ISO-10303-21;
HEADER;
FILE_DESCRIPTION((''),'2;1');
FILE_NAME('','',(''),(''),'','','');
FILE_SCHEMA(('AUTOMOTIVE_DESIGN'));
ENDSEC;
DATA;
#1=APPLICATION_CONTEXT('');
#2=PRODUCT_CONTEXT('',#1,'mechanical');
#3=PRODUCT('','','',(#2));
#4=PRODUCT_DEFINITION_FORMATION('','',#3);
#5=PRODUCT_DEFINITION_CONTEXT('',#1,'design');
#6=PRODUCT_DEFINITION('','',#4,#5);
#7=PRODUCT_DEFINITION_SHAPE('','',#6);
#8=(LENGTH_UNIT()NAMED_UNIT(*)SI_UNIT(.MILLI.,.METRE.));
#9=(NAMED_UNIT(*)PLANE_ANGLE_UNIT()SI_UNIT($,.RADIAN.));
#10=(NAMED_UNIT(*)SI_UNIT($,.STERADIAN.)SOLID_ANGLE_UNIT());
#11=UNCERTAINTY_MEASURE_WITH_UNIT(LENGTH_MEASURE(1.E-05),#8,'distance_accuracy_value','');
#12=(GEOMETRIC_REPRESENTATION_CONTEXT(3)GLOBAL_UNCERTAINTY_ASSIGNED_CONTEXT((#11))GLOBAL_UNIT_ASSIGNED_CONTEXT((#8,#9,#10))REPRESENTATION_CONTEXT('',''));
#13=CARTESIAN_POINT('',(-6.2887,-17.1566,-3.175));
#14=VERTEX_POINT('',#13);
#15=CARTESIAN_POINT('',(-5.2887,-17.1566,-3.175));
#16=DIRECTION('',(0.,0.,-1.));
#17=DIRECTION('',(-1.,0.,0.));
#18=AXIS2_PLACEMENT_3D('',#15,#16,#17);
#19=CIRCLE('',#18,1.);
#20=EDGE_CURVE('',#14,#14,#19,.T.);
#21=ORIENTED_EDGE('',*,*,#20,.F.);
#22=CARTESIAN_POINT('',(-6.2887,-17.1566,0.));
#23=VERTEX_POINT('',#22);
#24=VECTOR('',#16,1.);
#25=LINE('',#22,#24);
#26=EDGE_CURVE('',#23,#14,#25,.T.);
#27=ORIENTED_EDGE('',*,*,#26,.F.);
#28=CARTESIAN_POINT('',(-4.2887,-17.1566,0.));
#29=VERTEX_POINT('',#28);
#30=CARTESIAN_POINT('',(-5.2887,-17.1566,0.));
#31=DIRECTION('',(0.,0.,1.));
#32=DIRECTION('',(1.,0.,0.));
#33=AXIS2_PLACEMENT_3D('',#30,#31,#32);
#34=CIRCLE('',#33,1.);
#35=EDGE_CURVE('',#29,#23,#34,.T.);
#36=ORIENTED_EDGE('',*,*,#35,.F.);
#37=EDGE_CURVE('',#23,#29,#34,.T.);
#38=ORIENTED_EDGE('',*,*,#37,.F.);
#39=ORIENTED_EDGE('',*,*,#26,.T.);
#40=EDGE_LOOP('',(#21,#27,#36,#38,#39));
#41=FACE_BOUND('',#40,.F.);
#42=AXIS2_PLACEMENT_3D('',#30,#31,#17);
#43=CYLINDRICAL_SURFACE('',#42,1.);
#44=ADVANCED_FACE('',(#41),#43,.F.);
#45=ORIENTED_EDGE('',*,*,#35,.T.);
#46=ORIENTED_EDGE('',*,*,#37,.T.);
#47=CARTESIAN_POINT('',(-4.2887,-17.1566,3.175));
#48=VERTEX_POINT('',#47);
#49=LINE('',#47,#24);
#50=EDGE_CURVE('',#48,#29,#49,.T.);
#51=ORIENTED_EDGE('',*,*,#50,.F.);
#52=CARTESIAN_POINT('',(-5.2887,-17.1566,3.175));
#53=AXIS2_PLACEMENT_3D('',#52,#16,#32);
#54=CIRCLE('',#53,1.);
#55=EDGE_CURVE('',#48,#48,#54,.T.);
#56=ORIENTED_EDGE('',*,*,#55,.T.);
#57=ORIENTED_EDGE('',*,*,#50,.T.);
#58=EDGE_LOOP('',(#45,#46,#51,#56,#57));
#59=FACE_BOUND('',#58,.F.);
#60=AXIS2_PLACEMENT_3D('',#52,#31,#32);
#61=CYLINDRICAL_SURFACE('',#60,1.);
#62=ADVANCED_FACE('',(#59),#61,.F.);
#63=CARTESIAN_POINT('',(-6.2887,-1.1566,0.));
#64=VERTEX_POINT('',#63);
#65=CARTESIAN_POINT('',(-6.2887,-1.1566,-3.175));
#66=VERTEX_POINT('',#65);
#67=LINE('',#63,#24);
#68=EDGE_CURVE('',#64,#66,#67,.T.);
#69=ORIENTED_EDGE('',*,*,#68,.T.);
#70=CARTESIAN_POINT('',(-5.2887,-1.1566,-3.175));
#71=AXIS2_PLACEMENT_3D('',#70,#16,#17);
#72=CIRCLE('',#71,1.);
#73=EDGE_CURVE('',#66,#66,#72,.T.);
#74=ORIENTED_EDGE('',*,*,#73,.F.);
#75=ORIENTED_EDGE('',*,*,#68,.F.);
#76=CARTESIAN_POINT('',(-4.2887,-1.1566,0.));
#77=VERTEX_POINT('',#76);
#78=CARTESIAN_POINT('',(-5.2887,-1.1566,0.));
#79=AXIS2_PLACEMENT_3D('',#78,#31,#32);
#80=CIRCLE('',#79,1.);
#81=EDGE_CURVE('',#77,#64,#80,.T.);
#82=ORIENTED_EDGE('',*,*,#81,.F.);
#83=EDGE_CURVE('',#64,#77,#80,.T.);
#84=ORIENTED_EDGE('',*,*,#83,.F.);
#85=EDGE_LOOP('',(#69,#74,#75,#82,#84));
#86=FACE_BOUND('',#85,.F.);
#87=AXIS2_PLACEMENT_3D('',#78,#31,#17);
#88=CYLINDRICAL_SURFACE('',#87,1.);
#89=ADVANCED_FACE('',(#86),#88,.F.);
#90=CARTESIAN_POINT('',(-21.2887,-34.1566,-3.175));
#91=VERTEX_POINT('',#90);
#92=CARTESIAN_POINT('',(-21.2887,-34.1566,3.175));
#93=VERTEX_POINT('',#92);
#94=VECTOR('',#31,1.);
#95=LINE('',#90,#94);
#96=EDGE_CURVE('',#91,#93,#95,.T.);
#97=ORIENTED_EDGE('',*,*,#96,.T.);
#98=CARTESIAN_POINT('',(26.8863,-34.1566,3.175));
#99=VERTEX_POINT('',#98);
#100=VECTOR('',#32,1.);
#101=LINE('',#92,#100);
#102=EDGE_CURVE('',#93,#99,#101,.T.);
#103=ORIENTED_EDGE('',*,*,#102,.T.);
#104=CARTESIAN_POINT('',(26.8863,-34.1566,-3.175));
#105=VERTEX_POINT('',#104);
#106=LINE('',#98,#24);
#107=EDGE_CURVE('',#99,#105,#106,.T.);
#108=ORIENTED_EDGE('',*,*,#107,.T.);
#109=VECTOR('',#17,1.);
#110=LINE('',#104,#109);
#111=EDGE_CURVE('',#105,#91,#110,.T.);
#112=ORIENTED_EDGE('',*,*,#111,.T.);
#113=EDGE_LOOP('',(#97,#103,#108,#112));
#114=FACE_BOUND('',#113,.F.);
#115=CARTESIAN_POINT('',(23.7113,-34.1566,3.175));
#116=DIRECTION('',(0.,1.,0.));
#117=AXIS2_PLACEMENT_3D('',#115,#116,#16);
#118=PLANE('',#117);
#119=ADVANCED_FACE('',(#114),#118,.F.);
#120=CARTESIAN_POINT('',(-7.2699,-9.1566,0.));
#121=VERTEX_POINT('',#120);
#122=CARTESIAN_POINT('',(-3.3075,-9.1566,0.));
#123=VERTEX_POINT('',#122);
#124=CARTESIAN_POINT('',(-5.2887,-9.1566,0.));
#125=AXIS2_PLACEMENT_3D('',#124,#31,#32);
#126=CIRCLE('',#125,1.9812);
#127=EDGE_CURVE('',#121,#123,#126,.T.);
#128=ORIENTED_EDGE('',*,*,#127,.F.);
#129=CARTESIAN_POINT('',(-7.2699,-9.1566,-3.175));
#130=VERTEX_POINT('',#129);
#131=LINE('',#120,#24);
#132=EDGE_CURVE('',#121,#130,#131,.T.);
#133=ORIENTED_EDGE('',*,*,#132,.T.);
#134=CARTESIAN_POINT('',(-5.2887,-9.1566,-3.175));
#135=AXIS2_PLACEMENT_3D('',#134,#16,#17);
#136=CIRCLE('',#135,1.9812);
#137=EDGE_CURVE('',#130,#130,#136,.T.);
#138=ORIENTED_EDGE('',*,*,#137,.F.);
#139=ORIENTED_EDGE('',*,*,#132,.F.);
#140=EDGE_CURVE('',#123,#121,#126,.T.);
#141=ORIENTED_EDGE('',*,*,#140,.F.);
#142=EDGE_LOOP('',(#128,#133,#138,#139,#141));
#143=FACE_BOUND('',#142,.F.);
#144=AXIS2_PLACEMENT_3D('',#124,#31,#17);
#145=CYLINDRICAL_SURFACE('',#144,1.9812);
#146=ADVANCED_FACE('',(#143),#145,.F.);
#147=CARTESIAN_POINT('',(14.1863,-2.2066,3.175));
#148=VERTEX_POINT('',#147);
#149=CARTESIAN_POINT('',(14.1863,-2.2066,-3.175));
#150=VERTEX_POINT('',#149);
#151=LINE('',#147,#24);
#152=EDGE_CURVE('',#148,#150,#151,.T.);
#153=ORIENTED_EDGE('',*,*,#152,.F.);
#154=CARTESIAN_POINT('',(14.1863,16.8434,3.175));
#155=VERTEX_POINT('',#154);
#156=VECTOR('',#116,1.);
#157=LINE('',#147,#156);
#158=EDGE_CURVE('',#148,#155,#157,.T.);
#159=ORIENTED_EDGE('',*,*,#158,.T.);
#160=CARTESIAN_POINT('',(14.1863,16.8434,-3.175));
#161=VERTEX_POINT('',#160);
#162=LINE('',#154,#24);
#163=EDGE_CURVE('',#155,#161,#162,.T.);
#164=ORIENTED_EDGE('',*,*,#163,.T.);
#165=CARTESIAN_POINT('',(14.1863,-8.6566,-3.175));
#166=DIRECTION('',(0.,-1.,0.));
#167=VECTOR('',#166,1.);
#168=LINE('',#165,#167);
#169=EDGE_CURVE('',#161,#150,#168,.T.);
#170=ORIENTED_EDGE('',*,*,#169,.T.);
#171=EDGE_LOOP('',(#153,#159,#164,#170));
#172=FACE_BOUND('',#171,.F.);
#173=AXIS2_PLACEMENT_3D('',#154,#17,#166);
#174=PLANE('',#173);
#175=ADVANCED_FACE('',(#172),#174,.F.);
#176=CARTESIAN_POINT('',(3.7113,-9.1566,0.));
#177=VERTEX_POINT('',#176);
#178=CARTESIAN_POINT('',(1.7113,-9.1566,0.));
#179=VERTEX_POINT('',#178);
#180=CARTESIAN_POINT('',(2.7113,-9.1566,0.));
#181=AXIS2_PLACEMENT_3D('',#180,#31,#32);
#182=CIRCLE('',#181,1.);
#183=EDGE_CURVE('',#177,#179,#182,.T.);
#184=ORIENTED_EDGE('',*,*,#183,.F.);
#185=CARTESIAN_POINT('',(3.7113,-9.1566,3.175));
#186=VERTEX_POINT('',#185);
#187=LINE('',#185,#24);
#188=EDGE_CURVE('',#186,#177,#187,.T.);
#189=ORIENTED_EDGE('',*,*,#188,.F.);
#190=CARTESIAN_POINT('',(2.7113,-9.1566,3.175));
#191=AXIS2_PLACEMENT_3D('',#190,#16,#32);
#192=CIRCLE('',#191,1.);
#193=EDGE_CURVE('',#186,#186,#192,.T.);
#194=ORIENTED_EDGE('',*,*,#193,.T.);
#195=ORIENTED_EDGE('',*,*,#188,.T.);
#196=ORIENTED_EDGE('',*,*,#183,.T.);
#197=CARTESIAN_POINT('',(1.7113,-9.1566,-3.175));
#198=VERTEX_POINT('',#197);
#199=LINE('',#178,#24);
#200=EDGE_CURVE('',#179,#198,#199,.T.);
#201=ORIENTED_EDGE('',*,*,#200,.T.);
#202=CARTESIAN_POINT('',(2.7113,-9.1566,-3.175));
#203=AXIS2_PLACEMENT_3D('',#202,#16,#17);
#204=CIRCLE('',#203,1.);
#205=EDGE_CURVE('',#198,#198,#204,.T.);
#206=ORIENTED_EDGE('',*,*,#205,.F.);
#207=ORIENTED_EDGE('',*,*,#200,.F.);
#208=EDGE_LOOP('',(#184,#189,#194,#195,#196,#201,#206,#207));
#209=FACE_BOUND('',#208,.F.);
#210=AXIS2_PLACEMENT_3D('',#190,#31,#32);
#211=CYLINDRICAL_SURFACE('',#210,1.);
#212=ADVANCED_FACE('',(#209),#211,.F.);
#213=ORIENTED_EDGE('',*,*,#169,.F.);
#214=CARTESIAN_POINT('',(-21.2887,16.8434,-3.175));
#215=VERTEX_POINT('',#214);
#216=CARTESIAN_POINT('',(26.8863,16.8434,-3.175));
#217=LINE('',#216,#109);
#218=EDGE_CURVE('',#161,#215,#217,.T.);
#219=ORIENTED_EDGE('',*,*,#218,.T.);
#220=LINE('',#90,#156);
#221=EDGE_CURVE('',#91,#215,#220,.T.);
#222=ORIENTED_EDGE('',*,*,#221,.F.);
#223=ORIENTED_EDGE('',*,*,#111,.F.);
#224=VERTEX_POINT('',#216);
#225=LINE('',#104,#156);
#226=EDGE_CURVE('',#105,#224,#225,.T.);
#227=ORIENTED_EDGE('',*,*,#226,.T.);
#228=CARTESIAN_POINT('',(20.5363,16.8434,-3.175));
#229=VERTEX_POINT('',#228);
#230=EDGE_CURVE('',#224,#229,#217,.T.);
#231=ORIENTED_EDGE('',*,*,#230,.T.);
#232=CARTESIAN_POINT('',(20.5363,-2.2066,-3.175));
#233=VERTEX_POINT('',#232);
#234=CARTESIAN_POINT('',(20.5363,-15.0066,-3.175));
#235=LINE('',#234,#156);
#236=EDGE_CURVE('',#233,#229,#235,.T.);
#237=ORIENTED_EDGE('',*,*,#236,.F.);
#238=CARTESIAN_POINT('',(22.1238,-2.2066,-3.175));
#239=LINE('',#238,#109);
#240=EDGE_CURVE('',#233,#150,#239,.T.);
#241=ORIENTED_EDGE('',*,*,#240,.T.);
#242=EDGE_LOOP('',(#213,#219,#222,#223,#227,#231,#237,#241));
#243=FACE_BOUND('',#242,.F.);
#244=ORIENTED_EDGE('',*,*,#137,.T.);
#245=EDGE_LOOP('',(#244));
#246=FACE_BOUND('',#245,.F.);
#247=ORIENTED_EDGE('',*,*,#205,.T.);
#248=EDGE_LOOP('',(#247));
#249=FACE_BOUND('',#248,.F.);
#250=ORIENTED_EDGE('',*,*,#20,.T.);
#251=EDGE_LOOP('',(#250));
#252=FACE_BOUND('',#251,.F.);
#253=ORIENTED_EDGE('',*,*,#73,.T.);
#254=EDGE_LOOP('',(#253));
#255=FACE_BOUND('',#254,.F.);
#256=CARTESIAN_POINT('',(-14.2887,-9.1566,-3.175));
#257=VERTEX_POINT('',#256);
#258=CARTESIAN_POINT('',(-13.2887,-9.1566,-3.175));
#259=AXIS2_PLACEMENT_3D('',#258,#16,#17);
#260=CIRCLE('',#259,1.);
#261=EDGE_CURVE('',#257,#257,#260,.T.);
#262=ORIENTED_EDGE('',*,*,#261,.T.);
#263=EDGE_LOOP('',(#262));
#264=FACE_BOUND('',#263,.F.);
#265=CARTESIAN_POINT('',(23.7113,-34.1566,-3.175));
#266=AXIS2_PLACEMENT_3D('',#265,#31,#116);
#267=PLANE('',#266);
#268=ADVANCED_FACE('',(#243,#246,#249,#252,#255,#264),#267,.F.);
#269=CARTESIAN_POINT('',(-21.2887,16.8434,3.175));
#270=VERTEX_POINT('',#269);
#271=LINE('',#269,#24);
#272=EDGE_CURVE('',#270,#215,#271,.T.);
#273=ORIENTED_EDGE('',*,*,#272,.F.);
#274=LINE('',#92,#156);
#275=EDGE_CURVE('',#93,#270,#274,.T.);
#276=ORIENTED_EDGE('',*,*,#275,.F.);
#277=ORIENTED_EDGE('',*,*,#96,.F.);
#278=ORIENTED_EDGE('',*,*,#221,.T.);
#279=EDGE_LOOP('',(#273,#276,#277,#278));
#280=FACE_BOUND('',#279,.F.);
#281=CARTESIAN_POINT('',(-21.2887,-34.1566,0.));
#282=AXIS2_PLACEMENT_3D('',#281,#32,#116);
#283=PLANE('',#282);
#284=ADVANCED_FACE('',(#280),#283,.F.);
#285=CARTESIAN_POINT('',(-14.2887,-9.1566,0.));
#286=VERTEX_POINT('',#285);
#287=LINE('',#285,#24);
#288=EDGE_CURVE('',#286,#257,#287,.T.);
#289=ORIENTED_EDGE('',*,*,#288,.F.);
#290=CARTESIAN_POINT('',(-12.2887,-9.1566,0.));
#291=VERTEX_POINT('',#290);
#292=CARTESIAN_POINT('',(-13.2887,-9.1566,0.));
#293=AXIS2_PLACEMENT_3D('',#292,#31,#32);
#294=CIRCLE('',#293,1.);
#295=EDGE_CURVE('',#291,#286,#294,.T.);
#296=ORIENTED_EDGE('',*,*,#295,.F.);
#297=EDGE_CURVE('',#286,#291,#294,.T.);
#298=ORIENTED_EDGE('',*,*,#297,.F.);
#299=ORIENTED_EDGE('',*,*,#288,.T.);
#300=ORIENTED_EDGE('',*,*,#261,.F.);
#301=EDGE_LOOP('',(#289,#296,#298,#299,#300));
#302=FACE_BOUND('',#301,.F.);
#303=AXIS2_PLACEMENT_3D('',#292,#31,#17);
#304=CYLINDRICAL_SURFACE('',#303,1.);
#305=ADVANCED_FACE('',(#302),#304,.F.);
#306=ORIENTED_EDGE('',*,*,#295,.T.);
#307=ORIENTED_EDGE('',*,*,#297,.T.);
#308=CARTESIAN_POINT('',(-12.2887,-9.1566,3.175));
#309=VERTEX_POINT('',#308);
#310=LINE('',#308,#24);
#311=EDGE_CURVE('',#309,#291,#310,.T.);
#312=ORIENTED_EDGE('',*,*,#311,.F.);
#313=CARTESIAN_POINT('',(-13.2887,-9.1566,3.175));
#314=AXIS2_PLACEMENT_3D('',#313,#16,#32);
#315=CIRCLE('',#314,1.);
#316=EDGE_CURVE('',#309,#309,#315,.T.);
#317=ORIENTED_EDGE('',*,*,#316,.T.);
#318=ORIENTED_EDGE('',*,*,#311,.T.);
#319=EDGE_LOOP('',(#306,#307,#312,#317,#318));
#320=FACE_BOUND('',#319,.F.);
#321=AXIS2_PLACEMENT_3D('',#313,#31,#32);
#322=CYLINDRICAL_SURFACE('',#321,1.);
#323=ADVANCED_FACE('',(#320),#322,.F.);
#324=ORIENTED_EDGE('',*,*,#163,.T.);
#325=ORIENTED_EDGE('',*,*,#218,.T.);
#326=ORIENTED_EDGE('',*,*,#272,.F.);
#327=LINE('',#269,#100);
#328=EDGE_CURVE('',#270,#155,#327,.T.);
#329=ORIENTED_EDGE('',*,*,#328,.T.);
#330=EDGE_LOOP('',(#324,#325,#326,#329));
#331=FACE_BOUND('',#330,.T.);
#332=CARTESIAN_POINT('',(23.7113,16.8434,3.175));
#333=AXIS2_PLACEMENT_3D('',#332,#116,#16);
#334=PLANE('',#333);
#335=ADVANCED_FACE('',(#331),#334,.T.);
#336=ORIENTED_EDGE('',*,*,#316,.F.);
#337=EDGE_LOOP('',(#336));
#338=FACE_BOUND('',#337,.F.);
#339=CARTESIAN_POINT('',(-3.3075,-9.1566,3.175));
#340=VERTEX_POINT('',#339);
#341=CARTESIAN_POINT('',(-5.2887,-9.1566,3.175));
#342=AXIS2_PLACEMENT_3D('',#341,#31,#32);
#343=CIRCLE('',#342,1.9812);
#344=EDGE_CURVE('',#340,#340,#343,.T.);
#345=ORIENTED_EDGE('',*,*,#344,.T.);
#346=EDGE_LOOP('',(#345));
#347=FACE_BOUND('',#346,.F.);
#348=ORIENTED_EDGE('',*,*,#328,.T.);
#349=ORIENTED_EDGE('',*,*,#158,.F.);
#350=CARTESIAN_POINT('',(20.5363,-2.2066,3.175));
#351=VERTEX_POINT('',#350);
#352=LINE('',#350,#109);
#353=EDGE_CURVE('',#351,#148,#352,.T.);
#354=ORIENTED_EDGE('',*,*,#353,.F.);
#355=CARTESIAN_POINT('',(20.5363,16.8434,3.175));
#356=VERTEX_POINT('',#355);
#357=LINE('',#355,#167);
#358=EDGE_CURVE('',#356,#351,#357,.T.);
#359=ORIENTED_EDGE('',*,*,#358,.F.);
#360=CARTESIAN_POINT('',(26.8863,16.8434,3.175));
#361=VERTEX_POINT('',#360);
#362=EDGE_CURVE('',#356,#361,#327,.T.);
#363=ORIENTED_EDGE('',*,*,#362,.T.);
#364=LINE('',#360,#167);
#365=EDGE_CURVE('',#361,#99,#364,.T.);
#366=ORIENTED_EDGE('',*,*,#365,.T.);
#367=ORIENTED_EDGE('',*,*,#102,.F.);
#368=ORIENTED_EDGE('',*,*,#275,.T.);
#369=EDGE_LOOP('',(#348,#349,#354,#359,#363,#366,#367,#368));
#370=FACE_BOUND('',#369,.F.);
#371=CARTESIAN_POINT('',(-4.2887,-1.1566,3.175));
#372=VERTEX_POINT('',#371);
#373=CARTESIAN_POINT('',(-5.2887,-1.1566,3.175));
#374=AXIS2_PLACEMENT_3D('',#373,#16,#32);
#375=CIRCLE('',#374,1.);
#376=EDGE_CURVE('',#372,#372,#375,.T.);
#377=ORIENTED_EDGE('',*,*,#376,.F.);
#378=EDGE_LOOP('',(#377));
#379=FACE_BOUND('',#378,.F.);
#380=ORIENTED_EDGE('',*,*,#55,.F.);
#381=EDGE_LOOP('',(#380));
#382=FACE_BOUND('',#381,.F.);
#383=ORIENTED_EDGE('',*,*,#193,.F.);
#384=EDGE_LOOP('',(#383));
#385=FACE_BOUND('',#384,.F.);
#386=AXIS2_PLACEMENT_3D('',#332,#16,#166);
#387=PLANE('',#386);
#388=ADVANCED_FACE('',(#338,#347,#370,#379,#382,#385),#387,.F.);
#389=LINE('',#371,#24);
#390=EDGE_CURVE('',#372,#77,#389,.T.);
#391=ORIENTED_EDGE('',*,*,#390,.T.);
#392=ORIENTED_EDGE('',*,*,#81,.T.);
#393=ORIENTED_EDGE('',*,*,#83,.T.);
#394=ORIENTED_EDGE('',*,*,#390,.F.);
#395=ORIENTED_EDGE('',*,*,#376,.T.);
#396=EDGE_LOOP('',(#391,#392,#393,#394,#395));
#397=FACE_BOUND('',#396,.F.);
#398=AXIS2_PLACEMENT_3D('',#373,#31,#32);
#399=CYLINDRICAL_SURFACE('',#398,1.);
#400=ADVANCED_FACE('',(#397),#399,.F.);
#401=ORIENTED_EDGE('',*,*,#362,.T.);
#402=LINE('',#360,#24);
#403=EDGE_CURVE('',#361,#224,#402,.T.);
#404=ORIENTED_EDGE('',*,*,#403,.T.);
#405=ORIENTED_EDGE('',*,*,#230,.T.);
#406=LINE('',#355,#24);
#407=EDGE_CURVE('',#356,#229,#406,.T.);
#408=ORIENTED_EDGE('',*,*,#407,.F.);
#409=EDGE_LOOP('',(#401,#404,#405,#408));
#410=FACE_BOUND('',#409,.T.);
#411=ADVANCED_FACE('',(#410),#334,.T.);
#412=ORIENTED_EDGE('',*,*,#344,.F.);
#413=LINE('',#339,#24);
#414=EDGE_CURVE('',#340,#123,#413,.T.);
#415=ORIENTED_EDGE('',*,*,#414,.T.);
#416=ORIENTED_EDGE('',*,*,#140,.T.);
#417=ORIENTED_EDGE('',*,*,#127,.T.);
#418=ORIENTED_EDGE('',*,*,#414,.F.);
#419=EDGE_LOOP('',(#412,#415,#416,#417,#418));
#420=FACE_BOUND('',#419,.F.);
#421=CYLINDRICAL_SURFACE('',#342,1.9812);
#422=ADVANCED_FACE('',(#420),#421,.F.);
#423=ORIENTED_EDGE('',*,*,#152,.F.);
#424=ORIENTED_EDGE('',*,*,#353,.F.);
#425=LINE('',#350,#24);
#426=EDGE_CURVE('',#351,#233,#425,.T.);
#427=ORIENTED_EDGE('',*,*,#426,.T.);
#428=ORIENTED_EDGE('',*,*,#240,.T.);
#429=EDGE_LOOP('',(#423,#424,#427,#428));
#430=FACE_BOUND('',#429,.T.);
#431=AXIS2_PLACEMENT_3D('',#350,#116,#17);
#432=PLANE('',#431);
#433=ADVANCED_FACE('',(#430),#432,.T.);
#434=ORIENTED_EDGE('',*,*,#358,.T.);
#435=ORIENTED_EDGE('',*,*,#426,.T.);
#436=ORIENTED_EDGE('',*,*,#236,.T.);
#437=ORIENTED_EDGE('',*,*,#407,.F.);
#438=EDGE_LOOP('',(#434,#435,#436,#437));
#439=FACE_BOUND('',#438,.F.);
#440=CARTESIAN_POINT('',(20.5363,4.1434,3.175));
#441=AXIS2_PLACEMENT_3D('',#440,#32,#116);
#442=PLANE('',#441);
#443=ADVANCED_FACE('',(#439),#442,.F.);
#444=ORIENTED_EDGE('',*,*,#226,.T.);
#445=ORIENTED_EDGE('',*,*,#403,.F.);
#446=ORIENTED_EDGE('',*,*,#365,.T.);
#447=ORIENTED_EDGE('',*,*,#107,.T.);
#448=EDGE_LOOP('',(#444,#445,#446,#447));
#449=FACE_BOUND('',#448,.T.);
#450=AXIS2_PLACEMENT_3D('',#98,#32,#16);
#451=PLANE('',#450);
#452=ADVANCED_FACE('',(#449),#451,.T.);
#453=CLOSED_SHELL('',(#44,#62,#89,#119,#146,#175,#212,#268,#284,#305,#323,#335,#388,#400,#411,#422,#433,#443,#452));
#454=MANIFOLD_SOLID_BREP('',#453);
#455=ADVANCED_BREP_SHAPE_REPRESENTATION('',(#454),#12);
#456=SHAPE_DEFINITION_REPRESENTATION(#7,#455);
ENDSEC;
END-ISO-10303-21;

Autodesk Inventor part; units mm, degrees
ref_plane "YZ Plane" through (0, 0, 0) normal (1, 0, 0) x (0, 1, 0)
ref_plane "XZ Plane" through (0, 0, 0) normal (0, 1, 0) x (-1, 0, 0)
ref_plane "XY Plane" through (0, 0, 0) normal (0, 0, 1) x (1, 0, 0)
sketch "Sketch1" plane through (0, 0, 0) normal (0, 0, 1) x (1, 0, 0)
  line L0 (-21.2887, 16.8434) -> (23.7113, 16.8434)
  line L1 (23.7113, 16.8434) -> (23.7113, -34.1566)
  line L2 (23.7113, -34.1566) -> (-21.2887, -34.1566)
  line L3 (-21.2887, -34.1566) -> (-21.2887, 16.8434)
  point P0 (0, 0)
  dimension "d0" = 45
  dimension "d1" = 51
extrude "Extrusion1" add sketch "Sketch1" along normal blind 3.175
sketch "Sketch2" plane through (0, 0, 3.175) normal (0, 0, 1) x (1, 0, 0)
  line L0 (-21.2887, -34.1566) -> (-21.2887, 16.8434) projected
  line L1 (-21.2887, -34.1566) -> (-21.2887, -9.1566)
  circle A0 centre (-5.2887, -9.1566) radius 8
  circle A1 centre (-13.2887, -9.1566) radius 1
  circle A2 centre (-5.2887, -1.1566) radius 1
  circle A3 centre (2.7113, -9.1566) radius 1
  circle A4 centre (-5.2887, -17.1566) radius 1
  point P0 (0, 0)
  dimension "d4" = 25
  dimension "d6" = 16
  dimension "d7" = 2
  dimension "d8" = 2
  dimension "d9" = 2
  dimension "d10" = 2
  dimension "d11" = 16
extrude "Extrusion2" cut sketch "Sketch2" against normal blind 25.4 contours A0 A3 | A0 A3 | A2 A0 | A0 A2 | A4 A0 | A0 A4 | A1 A0 | A0 A1
sketch "Sketch3" plane through (0, 0, 3.175) normal (0, 0, 1) x (1, 0, 0)
  circle A0 centre (-5.2887, -9.1566) radius 1.9812
  point P0 (0, 0)
  dimension "d14" = 3.9624
extrude "Extrusion3" cut sketch "Sketch3" against normal blind 25.4
sketch "Sketch4" plane through (0, 0, 0) normal (0, 0, -1) x (-1, 0, 0)
  circle A0 centre (5.2887, -9.1566) radius 1.9812 projected
  circle A1 centre (5.2887, -17.1566) radius 1 projected
  circle A2 centre (13.2887, -9.1566) radius 1 projected
  circle A3 centre (5.2887, -1.1566) radius 1 projected
  circle A4 centre (-2.7113, -9.1566) radius 1 projected
  line L0 (21.2887, 16.8434) -> (-23.7113, 16.8434) projected
  line L1 (-23.7113, 16.8434) -> (-23.7113, -34.1566) projected
  line L2 (-23.7113, -34.1566) -> (21.2887, -34.1566) projected
  line L3 (21.2887, -34.1566) -> (21.2887, 16.8434) projected
  line L4 (-23.7113, -34.1566) -> (-17.3613, -34.1566)
  point P0 (0, 0)
  dimension "d17" = 6.35
extrude "Extrusion4" add sketch "Sketch4" along normal blind 3.175
sketch "Sketch5" plane through (23.7113, -34.1566, 3.175) normal (1, 0, 0) x (0, 0, -1)
  line L0 (0, 51) -> (0, 0) projected
  line L1 (0, 0) -> (6.35, 0) projected
  line L2 (6.35, 0) -> (6.35, 51) projected
  line L3 (0, 51) -> (6.35, 51) projected
  point P0 (3.175, 34.1566)
extrude "Extrusion5" add sketch "Sketch5" along normal blind 3.175
sketch "Sketch6" plane through (0, 0, 3.175) normal (0, 0, 1) x (1, 0, 0)
  line L0 (-21.2887, 16.8434) -> (26.8863, 16.8434) projected
  line L1 (26.8863, 16.8434) -> (20.5363, 16.8434)
  line L2 (20.5363, 16.8434) -> (14.1863, 16.8434)
  line L3 (14.1863, 16.8434) -> (14.1863, 4.1434)
  line L4 (14.1863, 4.1434) -> (20.5363, 4.1434)
  line L5 (20.5363, 4.1434) -> (20.5363, 16.8434)
  line L6 (14.1863, 4.1434) -> (20.5363, 4.1434)
  line L7 (20.5363, 4.1434) -> (20.5363, -2.2066)
  line L8 (20.5363, -2.2066) -> (14.1863, -2.2066)
  line L9 (14.1863, -2.2066) -> (14.1863, 4.1434)
  point P0 (0, 0)
  dimension "d22" = 6.35
  dimension "d23" = 6.35
  dimension "d24" = 12.7
  dimension "d25" = 6.35
extrude "Extrusion6" cut sketch "Sketch6" against normal blind 25.4
properties part number "sidebasehole"
